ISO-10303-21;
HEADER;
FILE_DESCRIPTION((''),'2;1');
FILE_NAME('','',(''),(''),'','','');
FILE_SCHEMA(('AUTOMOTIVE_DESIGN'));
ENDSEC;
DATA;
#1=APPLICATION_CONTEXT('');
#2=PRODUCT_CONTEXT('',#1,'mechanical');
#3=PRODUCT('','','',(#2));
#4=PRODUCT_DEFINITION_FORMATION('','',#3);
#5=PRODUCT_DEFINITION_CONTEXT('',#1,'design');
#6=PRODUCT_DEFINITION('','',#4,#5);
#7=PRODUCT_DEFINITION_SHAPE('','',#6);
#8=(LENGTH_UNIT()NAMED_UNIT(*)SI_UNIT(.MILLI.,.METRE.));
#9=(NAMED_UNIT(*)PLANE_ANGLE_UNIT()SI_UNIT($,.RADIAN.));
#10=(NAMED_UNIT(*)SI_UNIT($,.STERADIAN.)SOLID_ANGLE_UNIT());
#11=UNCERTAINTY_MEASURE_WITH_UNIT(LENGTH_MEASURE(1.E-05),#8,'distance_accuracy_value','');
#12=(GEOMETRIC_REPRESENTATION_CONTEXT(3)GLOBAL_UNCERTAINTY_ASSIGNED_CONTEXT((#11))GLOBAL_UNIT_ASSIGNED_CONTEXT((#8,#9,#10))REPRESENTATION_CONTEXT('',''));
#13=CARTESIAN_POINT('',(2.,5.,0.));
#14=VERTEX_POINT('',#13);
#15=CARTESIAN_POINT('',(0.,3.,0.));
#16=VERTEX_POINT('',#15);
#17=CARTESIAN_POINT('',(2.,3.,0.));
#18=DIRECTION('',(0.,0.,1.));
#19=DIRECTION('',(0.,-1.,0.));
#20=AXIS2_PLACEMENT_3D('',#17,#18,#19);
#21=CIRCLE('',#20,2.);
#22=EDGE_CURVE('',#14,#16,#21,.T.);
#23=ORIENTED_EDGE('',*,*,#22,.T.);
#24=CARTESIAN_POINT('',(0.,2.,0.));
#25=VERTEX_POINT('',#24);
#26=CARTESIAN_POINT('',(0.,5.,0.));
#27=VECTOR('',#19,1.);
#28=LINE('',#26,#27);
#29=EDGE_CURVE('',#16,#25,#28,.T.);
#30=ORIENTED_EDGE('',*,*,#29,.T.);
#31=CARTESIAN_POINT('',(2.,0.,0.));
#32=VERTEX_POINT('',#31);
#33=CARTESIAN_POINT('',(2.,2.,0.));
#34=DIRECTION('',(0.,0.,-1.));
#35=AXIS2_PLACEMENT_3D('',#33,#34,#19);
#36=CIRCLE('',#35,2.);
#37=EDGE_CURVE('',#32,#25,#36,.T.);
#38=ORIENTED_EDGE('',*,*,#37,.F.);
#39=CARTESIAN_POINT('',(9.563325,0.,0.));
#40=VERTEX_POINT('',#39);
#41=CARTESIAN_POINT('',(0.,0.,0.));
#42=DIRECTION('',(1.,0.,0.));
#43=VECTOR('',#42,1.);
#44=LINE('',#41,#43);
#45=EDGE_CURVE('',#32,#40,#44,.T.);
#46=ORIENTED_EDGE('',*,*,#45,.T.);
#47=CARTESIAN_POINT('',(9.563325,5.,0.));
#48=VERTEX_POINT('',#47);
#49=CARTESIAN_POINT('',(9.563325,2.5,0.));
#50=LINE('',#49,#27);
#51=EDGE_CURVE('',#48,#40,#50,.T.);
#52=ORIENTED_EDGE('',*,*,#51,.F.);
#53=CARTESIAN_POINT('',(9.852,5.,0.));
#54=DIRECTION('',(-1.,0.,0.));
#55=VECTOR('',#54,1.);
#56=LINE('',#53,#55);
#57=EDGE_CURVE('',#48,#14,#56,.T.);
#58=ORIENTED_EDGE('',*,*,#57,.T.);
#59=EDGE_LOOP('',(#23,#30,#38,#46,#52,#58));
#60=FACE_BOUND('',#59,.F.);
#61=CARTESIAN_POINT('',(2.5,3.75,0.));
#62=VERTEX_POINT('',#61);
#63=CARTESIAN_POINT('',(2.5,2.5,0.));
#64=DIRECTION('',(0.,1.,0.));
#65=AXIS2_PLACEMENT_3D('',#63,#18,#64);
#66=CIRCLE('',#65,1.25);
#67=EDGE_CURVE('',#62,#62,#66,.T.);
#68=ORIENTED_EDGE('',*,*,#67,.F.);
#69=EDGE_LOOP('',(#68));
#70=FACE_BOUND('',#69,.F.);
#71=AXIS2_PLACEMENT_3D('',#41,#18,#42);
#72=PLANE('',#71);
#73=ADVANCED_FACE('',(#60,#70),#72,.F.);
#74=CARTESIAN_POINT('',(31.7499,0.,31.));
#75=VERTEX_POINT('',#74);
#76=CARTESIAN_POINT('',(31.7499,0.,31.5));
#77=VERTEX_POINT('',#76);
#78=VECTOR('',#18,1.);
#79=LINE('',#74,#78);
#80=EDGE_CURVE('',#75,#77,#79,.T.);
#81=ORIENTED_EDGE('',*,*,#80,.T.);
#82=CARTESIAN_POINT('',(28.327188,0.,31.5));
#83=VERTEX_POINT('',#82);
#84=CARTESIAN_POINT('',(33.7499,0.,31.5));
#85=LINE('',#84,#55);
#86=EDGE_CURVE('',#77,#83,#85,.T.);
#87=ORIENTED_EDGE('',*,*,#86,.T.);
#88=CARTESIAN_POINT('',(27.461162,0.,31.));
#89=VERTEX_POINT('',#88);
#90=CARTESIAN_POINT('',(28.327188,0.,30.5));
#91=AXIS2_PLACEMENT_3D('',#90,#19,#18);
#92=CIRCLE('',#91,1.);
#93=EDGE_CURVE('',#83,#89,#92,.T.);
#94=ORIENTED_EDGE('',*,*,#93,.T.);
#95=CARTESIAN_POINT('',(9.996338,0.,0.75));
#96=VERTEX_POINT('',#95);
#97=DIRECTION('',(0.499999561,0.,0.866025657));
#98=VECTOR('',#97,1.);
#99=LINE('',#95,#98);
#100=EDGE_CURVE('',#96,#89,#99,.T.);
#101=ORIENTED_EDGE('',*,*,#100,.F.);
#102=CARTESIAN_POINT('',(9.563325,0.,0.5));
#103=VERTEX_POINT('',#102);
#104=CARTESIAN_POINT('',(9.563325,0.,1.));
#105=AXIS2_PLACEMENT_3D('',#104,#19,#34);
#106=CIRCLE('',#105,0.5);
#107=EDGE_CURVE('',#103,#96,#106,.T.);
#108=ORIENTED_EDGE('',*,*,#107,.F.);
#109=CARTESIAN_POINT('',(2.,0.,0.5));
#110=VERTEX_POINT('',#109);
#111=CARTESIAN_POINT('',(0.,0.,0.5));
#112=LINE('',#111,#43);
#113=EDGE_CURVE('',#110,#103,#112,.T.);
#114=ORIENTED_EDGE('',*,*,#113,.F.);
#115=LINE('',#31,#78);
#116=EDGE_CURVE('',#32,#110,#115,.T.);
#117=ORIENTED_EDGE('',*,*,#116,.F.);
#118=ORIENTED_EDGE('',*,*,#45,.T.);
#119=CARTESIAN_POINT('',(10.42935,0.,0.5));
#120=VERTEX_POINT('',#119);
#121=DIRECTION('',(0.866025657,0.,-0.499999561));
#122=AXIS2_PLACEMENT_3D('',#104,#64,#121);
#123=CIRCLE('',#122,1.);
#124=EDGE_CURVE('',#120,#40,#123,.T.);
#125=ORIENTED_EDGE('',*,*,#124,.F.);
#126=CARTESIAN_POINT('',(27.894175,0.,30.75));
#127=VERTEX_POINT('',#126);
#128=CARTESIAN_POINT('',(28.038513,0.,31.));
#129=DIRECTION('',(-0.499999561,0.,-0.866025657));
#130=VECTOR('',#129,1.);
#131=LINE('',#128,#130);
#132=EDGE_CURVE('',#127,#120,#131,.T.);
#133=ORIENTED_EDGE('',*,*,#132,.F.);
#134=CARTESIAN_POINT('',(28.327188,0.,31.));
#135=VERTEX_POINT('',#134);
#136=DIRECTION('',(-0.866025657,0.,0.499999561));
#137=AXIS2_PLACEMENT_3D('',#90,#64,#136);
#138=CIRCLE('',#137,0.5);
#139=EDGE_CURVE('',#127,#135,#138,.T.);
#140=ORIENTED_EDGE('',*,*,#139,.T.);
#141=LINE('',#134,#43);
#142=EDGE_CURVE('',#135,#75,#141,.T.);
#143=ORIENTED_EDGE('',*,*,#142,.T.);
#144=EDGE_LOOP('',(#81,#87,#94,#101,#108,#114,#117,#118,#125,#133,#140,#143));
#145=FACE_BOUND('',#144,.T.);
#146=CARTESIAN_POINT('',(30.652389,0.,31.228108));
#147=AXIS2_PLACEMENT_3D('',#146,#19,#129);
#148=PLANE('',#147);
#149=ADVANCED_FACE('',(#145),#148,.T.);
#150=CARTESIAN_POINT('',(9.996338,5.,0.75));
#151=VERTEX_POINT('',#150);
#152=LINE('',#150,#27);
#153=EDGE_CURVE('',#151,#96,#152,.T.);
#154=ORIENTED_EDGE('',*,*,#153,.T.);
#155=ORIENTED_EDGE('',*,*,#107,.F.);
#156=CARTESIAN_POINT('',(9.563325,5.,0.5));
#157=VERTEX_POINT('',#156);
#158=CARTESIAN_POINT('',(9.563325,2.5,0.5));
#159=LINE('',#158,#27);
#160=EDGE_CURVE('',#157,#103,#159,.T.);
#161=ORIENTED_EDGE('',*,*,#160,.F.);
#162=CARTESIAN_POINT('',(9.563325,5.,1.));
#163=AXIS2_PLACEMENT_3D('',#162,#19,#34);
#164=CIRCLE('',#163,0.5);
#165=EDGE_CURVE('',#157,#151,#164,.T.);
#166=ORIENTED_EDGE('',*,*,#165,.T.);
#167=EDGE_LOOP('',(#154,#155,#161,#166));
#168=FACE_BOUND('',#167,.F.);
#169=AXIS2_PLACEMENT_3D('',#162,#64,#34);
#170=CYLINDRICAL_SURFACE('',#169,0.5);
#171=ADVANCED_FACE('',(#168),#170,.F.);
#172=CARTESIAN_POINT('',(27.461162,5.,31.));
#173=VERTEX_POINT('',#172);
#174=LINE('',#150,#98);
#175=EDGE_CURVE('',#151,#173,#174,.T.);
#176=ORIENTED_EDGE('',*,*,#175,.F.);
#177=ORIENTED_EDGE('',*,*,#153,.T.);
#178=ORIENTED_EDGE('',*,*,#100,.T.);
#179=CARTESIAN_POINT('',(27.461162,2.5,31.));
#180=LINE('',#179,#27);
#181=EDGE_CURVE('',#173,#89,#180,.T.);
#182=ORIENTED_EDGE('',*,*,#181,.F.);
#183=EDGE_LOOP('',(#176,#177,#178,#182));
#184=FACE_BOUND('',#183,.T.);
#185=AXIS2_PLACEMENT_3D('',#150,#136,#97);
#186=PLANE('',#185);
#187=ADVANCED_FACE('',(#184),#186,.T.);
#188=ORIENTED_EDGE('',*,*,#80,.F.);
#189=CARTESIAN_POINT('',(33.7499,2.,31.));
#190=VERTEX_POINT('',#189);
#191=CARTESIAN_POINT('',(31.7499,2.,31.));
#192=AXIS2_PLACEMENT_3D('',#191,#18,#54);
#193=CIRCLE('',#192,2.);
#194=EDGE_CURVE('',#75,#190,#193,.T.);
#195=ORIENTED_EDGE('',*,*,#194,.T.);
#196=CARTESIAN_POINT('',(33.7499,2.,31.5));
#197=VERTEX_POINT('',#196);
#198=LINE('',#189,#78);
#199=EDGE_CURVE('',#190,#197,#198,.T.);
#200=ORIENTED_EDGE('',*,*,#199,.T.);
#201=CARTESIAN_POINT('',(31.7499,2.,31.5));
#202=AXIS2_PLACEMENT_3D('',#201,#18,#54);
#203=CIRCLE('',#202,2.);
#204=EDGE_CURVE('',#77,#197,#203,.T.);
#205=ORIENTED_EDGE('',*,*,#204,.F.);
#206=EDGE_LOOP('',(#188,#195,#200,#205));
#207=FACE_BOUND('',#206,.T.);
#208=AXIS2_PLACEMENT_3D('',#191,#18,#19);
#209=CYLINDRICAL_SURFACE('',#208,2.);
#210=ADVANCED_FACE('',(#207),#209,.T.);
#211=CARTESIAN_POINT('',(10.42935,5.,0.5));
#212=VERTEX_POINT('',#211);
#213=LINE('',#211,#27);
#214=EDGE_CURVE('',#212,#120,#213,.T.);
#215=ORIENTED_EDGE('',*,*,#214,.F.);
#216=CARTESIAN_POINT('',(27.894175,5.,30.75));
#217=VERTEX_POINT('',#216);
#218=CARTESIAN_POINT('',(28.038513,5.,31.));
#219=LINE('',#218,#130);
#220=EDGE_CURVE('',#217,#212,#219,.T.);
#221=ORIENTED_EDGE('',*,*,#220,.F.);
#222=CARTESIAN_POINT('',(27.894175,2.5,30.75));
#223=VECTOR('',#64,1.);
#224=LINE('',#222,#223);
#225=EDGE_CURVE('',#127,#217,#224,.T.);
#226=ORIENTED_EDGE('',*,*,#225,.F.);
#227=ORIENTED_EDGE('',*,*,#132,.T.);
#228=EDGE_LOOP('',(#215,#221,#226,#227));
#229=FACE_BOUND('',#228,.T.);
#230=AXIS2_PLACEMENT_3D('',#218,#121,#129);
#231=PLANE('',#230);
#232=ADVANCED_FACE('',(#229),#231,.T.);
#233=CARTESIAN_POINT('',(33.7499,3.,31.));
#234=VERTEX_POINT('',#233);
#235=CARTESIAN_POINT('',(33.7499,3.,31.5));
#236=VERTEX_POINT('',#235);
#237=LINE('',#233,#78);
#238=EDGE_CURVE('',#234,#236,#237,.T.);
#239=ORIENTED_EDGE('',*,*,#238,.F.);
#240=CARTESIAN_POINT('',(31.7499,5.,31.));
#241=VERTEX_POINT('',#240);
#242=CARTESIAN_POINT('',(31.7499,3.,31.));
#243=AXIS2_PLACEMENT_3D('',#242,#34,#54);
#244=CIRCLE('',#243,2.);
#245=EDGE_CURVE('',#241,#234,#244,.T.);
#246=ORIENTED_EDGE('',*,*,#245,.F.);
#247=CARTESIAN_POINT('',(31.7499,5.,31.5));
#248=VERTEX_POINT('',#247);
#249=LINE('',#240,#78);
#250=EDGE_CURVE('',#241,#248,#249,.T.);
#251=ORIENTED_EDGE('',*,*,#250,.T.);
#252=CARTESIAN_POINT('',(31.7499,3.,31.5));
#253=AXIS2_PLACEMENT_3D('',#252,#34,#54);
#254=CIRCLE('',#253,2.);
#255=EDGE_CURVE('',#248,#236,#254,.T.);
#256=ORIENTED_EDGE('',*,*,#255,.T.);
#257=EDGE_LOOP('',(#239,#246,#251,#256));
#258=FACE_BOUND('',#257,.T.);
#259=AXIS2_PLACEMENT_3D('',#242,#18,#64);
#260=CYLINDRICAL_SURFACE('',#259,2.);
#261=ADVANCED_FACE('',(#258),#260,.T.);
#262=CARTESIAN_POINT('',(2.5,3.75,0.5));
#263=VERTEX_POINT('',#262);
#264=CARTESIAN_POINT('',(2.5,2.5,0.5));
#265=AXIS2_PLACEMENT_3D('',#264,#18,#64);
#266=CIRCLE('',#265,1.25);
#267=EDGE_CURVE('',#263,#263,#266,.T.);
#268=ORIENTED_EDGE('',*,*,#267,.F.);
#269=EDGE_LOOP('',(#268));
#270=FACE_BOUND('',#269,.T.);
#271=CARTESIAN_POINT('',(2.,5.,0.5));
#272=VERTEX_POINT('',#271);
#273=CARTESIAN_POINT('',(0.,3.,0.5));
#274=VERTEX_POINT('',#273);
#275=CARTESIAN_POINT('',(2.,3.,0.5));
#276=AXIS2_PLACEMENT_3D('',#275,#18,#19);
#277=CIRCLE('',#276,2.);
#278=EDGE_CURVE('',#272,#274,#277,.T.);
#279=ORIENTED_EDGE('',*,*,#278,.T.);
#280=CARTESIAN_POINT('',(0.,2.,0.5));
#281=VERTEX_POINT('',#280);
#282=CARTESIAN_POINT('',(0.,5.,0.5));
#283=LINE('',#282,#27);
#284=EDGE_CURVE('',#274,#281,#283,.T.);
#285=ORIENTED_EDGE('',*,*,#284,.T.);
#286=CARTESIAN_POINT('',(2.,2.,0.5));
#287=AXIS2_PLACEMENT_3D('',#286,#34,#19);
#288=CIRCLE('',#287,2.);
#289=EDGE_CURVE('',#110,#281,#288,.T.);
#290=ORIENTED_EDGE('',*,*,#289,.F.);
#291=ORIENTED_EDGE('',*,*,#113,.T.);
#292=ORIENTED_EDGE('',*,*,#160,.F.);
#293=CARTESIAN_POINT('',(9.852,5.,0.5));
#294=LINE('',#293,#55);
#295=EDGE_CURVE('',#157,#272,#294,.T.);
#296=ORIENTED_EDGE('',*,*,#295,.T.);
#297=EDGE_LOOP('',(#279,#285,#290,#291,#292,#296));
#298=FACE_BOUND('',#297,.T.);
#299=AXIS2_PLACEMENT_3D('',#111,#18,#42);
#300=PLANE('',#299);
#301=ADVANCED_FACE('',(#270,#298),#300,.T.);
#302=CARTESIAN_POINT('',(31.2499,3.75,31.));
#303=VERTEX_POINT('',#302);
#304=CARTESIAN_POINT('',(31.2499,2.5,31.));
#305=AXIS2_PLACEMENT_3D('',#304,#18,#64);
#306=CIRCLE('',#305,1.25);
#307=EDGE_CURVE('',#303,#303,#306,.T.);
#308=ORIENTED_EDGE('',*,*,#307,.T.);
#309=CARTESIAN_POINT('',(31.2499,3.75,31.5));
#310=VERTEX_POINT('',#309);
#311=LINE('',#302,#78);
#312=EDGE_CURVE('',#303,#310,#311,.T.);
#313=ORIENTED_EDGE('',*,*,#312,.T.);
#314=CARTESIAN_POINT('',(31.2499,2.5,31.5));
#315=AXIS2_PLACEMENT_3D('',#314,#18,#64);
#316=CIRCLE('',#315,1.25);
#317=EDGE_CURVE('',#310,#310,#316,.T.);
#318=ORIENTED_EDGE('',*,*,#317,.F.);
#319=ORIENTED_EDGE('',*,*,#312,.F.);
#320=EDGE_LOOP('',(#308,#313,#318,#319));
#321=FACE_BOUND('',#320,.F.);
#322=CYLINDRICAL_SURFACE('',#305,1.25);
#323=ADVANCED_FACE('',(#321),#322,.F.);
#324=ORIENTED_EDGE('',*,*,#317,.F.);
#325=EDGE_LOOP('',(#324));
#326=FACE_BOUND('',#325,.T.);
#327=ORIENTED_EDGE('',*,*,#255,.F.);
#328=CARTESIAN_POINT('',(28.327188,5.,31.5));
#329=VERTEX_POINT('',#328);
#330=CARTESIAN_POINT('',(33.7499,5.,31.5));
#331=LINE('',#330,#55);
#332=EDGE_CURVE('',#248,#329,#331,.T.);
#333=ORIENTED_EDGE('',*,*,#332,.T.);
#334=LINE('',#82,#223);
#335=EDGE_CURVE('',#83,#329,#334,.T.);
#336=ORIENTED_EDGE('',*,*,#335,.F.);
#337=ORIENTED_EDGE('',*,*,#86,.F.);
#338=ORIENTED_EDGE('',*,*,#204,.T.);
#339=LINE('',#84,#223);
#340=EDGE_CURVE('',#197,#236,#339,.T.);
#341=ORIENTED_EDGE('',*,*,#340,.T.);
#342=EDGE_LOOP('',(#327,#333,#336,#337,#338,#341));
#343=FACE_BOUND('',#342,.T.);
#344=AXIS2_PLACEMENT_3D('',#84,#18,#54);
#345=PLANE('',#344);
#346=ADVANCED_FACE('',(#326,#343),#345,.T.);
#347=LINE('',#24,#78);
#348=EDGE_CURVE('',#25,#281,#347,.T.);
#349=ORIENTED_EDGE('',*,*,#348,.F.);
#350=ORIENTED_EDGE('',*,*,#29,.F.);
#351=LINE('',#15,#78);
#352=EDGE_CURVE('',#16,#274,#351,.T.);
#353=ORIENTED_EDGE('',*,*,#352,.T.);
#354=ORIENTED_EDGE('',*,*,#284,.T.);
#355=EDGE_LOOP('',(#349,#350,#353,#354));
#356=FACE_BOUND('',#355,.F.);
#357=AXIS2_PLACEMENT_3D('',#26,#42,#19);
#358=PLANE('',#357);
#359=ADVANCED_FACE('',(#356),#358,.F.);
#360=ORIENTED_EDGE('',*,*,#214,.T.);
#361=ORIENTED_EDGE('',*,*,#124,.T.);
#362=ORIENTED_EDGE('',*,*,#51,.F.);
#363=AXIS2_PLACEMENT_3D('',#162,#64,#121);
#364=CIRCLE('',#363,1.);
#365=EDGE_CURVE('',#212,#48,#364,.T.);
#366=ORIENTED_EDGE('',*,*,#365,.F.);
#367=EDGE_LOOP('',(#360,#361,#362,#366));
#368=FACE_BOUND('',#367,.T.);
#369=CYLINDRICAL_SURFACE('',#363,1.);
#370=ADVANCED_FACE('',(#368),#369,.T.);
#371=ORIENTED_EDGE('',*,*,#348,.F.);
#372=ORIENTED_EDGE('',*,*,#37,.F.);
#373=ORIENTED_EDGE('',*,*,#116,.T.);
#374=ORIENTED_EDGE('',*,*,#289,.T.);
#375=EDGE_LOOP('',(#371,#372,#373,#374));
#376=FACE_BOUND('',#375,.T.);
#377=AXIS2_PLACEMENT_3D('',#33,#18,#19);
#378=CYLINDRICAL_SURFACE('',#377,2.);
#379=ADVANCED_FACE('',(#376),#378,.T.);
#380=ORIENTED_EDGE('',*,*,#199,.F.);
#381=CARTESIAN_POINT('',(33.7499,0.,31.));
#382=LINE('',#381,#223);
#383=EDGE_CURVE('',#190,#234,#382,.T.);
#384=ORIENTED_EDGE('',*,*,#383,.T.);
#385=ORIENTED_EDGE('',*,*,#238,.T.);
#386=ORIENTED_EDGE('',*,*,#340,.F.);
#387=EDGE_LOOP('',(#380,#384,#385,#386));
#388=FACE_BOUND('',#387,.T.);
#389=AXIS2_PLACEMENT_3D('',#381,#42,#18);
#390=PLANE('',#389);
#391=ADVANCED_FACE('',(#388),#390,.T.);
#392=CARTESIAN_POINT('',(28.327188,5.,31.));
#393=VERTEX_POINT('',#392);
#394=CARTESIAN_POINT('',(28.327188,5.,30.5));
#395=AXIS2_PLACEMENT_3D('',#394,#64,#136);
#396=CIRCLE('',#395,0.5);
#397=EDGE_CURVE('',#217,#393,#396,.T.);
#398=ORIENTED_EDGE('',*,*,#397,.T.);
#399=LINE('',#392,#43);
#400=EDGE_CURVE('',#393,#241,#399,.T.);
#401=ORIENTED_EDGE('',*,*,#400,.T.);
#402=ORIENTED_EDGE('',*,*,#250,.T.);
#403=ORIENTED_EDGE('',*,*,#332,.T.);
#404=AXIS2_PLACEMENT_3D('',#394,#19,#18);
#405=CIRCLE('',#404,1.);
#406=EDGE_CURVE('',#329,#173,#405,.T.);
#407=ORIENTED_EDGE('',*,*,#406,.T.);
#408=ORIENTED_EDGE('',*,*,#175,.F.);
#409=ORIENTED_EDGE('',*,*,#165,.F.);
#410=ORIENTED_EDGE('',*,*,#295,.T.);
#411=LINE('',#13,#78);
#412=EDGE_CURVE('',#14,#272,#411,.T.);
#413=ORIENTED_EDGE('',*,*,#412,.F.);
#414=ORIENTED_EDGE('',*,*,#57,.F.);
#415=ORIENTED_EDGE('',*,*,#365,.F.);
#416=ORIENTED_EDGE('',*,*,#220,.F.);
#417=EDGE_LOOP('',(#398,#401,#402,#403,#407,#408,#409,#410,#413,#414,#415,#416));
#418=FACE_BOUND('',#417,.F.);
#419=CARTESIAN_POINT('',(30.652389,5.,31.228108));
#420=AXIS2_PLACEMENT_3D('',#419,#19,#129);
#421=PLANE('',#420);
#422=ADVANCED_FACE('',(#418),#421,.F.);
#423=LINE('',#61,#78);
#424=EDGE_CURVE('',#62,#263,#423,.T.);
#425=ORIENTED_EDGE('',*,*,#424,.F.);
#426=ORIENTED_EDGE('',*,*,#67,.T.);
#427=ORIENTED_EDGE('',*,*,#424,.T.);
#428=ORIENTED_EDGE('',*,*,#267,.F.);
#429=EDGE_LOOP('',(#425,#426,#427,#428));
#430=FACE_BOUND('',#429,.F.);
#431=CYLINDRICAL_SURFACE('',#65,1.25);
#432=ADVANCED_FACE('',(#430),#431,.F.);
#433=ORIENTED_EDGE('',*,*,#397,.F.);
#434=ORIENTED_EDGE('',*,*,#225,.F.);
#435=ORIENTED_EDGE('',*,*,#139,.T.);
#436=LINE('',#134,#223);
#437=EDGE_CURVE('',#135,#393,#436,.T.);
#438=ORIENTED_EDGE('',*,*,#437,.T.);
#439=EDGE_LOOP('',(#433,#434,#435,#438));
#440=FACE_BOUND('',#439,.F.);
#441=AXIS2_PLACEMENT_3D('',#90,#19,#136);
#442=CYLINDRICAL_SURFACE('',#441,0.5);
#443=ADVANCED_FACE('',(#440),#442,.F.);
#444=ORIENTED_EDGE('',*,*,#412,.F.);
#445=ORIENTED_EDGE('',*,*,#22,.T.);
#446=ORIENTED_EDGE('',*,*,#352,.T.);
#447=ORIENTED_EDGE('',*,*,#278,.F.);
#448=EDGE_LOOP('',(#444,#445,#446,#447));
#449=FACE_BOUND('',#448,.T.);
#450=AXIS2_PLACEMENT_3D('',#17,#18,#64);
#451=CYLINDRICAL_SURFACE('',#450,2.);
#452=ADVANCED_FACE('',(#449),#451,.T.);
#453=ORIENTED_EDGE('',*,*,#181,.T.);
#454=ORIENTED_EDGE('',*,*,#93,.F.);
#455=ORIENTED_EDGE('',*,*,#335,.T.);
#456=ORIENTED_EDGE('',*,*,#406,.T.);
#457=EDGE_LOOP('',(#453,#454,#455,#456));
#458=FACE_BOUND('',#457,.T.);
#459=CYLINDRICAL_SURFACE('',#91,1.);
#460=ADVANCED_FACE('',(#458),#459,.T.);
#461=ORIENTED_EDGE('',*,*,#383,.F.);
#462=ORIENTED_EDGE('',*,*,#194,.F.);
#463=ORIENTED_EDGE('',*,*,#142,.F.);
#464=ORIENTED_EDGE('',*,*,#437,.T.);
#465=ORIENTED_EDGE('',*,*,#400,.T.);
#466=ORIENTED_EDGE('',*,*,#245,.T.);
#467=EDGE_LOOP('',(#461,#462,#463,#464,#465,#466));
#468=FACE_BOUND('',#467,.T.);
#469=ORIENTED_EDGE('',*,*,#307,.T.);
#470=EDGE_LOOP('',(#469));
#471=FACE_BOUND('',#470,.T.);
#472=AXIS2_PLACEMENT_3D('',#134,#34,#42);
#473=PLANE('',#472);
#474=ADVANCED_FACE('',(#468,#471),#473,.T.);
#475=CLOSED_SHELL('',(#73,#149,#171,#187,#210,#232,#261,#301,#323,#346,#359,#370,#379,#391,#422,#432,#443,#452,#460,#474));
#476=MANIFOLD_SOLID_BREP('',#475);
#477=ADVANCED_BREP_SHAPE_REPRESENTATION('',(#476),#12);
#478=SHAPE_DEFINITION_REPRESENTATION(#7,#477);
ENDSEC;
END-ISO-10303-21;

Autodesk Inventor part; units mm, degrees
ref_plane "YZ Plane" through (0, 0, 0) normal (1, 0, 0) x (0, 1, 0)
ref_plane "XZ Plane" through (0, 0, 0) normal (0, 1, 0) x (-1, 0, 0)
ref_plane "XY Plane" through (0, 0, 0) normal (0, 0, 1) x (1, 0, 0)
sketch "Sketch1" plane through (0, 0, 0) normal (0, 0, 1) x (1, 0, 0)
  point P0 (0, 0)
sketch "Sketch2" plane through (0, 0, 0) normal (0, 0, 1) x (1, 0, 0)
  line L0 (0, 0) -> (9.852, 0)
  line L1 (9.852, 0) -> (9.852, 5)
  line L2 (9.852, 5) -> (0, 5)
  line L3 (0, 5) -> (0, 0)
  dimension "d0" = 5
  dimension "d1" = 9.852
extrude "Plate1" add sketch "Sketch2" along normal blind 0.5
sketch "Sketch3" plane through (9.852, 5, 0.5) normal (0.8660254, 0, -0.5) x (0, 1, 0)
  line L0 (-5, 0) -> (0, 0)
  line L1 (0, 0) -> (0, 35.507)
  line L2 (0, 35.507) -> (-5, 35.507)
  line L3 (-5, 35.507) -> (-5, 0)
edge flange "Flange1" height 35.7957 angle 60 thickness 0.5 bend radius 0.5 thickness toward (0.8660254, 0, -0.5) relief tear relief width 0.5 relief depth 0.25 edges at (9.852, 2.5, 0.5) wall of the first edge with corners at (9.852, 0, 0.5) (9.852, 5, 0.5) (27.6055, 5, 31.25) (27.6055, 0, 31.25)
bend "Bend1"
corner "Corner1"
sketch "Sketch4" plane through (28.0385, 0, 31) normal (0, 0, 1) x (1, 0, 0)
  line L0 (0, 5) -> (0, 0)
  line L1 (0, 0) -> (5.7113, 0)
  line L2 (5.7113, 0) -> (5.7113, 5)
  line L3 (5.7113, 5) -> (0, 5)
edge flange "Flange2" height 6 angle 60 thickness 0.5 bend radius 0.5 thickness toward (0, 0, 1) relief tear relief width 0.5 relief depth 0.25 edges at (28.0385, 2.5, 31) wall of the first edge with corners at (28.0385, 5, 31) (28.0385, 0, 31) (33.7499, 0, 31) (33.7499, 5, 31)
bend "Bend2"
corner "Corner2"
sketch "Sketch5" plane through (0, 0, 0) normal (0, 0, -1) x (-1, 0, 0)
  line L0 (-9.5633, 5) -> (-9.5633, 0) projected
  line L1 (0, 5) -> (0, 0) projected
  line L2 (0, 2.5) -> (-9.5633, 2.5) construction
  point P0 (-2.5, 2.5)
  dimension "d23" = 2.5
hole "Hole1" at (2.5, 2.5, 0) direction (0, 0, 1) diameter 2.5 depth 0.5 tip angle 118
sketch "Sketch6" plane through (33.7499, 0, 31) normal (0, 0, -1) x (-1, 0, 0)
  line L0 (5.4226, 0) -> (5.4226, 5) projected
  line L1 (0, 5) -> (0, 0) projected
  line L2 (0, 2.5) -> (5.4226, 2.5) construction
  point P0 (33.7498, 0)
  point P1 (2.5, 2.5)
  dimension "d31" = 2.5
hole "Hole2" at (31.2499, 2.5, 31) direction (0, 0, 1) diameter 2.5 depth 0.5 tip angle 118
fillet "Corner Round1" radius 2 4 edges at (0, 5, 0.25) (0, 0, 0.25) (33.7499, 0, 31.25) (33.7499, 5, 31.25)
equation "\"d29\" = Thickness"
equation "\"d37\" = Thickness"
equation "\"d3\" = BendReliefWidth"
equation "\"d4\" = BendReliefDepth"
equation "\"d5\" = MinimumRemnant"
equation "\"d6\" = BendRadius"
equation "\"d9\" = BendRadius"
equation "\"d10\" = CornerReliefSize"
equation "\"d11\" = GapSize"
equation "\"d12\" = JacobiRadiusSize"
equation "\"d13\" = BendReliefWidth"
equation "\"d14\" = BendReliefDepth"
equation "\"d15\" = MinimumRemnant"
equation "\"d16\" = BendRadius"
equation "\"d19\" = BendRadius"
equation "\"d20\" = CornerReliefSize"
equation "\"d21\" = GapSize"
equation "\"d22\" = JacobiRadiusSize"
equation "\"BendRadius\" = Thickness"
equation "\"BendReliefWidth\" = Thickness"
equation "\"BendReliefDepth\" = 0.5 * Thickness"
equation "\"CornerReliefSize\" = 4 * Thickness"
equation "\"MinimumRemnant\" = 2 * Thickness"
equation "\"TransitionRadius\" = BendRadius"
equation "\"JacobiRadiusSize\" = BendRadius"
equation "\"GapSize\" = Thickness"
equation "\"d2\" = BendRadius"
equation "\"Thickness\" = 0.5"
properties part number "core_earth_new" material "Copper, Cast"
